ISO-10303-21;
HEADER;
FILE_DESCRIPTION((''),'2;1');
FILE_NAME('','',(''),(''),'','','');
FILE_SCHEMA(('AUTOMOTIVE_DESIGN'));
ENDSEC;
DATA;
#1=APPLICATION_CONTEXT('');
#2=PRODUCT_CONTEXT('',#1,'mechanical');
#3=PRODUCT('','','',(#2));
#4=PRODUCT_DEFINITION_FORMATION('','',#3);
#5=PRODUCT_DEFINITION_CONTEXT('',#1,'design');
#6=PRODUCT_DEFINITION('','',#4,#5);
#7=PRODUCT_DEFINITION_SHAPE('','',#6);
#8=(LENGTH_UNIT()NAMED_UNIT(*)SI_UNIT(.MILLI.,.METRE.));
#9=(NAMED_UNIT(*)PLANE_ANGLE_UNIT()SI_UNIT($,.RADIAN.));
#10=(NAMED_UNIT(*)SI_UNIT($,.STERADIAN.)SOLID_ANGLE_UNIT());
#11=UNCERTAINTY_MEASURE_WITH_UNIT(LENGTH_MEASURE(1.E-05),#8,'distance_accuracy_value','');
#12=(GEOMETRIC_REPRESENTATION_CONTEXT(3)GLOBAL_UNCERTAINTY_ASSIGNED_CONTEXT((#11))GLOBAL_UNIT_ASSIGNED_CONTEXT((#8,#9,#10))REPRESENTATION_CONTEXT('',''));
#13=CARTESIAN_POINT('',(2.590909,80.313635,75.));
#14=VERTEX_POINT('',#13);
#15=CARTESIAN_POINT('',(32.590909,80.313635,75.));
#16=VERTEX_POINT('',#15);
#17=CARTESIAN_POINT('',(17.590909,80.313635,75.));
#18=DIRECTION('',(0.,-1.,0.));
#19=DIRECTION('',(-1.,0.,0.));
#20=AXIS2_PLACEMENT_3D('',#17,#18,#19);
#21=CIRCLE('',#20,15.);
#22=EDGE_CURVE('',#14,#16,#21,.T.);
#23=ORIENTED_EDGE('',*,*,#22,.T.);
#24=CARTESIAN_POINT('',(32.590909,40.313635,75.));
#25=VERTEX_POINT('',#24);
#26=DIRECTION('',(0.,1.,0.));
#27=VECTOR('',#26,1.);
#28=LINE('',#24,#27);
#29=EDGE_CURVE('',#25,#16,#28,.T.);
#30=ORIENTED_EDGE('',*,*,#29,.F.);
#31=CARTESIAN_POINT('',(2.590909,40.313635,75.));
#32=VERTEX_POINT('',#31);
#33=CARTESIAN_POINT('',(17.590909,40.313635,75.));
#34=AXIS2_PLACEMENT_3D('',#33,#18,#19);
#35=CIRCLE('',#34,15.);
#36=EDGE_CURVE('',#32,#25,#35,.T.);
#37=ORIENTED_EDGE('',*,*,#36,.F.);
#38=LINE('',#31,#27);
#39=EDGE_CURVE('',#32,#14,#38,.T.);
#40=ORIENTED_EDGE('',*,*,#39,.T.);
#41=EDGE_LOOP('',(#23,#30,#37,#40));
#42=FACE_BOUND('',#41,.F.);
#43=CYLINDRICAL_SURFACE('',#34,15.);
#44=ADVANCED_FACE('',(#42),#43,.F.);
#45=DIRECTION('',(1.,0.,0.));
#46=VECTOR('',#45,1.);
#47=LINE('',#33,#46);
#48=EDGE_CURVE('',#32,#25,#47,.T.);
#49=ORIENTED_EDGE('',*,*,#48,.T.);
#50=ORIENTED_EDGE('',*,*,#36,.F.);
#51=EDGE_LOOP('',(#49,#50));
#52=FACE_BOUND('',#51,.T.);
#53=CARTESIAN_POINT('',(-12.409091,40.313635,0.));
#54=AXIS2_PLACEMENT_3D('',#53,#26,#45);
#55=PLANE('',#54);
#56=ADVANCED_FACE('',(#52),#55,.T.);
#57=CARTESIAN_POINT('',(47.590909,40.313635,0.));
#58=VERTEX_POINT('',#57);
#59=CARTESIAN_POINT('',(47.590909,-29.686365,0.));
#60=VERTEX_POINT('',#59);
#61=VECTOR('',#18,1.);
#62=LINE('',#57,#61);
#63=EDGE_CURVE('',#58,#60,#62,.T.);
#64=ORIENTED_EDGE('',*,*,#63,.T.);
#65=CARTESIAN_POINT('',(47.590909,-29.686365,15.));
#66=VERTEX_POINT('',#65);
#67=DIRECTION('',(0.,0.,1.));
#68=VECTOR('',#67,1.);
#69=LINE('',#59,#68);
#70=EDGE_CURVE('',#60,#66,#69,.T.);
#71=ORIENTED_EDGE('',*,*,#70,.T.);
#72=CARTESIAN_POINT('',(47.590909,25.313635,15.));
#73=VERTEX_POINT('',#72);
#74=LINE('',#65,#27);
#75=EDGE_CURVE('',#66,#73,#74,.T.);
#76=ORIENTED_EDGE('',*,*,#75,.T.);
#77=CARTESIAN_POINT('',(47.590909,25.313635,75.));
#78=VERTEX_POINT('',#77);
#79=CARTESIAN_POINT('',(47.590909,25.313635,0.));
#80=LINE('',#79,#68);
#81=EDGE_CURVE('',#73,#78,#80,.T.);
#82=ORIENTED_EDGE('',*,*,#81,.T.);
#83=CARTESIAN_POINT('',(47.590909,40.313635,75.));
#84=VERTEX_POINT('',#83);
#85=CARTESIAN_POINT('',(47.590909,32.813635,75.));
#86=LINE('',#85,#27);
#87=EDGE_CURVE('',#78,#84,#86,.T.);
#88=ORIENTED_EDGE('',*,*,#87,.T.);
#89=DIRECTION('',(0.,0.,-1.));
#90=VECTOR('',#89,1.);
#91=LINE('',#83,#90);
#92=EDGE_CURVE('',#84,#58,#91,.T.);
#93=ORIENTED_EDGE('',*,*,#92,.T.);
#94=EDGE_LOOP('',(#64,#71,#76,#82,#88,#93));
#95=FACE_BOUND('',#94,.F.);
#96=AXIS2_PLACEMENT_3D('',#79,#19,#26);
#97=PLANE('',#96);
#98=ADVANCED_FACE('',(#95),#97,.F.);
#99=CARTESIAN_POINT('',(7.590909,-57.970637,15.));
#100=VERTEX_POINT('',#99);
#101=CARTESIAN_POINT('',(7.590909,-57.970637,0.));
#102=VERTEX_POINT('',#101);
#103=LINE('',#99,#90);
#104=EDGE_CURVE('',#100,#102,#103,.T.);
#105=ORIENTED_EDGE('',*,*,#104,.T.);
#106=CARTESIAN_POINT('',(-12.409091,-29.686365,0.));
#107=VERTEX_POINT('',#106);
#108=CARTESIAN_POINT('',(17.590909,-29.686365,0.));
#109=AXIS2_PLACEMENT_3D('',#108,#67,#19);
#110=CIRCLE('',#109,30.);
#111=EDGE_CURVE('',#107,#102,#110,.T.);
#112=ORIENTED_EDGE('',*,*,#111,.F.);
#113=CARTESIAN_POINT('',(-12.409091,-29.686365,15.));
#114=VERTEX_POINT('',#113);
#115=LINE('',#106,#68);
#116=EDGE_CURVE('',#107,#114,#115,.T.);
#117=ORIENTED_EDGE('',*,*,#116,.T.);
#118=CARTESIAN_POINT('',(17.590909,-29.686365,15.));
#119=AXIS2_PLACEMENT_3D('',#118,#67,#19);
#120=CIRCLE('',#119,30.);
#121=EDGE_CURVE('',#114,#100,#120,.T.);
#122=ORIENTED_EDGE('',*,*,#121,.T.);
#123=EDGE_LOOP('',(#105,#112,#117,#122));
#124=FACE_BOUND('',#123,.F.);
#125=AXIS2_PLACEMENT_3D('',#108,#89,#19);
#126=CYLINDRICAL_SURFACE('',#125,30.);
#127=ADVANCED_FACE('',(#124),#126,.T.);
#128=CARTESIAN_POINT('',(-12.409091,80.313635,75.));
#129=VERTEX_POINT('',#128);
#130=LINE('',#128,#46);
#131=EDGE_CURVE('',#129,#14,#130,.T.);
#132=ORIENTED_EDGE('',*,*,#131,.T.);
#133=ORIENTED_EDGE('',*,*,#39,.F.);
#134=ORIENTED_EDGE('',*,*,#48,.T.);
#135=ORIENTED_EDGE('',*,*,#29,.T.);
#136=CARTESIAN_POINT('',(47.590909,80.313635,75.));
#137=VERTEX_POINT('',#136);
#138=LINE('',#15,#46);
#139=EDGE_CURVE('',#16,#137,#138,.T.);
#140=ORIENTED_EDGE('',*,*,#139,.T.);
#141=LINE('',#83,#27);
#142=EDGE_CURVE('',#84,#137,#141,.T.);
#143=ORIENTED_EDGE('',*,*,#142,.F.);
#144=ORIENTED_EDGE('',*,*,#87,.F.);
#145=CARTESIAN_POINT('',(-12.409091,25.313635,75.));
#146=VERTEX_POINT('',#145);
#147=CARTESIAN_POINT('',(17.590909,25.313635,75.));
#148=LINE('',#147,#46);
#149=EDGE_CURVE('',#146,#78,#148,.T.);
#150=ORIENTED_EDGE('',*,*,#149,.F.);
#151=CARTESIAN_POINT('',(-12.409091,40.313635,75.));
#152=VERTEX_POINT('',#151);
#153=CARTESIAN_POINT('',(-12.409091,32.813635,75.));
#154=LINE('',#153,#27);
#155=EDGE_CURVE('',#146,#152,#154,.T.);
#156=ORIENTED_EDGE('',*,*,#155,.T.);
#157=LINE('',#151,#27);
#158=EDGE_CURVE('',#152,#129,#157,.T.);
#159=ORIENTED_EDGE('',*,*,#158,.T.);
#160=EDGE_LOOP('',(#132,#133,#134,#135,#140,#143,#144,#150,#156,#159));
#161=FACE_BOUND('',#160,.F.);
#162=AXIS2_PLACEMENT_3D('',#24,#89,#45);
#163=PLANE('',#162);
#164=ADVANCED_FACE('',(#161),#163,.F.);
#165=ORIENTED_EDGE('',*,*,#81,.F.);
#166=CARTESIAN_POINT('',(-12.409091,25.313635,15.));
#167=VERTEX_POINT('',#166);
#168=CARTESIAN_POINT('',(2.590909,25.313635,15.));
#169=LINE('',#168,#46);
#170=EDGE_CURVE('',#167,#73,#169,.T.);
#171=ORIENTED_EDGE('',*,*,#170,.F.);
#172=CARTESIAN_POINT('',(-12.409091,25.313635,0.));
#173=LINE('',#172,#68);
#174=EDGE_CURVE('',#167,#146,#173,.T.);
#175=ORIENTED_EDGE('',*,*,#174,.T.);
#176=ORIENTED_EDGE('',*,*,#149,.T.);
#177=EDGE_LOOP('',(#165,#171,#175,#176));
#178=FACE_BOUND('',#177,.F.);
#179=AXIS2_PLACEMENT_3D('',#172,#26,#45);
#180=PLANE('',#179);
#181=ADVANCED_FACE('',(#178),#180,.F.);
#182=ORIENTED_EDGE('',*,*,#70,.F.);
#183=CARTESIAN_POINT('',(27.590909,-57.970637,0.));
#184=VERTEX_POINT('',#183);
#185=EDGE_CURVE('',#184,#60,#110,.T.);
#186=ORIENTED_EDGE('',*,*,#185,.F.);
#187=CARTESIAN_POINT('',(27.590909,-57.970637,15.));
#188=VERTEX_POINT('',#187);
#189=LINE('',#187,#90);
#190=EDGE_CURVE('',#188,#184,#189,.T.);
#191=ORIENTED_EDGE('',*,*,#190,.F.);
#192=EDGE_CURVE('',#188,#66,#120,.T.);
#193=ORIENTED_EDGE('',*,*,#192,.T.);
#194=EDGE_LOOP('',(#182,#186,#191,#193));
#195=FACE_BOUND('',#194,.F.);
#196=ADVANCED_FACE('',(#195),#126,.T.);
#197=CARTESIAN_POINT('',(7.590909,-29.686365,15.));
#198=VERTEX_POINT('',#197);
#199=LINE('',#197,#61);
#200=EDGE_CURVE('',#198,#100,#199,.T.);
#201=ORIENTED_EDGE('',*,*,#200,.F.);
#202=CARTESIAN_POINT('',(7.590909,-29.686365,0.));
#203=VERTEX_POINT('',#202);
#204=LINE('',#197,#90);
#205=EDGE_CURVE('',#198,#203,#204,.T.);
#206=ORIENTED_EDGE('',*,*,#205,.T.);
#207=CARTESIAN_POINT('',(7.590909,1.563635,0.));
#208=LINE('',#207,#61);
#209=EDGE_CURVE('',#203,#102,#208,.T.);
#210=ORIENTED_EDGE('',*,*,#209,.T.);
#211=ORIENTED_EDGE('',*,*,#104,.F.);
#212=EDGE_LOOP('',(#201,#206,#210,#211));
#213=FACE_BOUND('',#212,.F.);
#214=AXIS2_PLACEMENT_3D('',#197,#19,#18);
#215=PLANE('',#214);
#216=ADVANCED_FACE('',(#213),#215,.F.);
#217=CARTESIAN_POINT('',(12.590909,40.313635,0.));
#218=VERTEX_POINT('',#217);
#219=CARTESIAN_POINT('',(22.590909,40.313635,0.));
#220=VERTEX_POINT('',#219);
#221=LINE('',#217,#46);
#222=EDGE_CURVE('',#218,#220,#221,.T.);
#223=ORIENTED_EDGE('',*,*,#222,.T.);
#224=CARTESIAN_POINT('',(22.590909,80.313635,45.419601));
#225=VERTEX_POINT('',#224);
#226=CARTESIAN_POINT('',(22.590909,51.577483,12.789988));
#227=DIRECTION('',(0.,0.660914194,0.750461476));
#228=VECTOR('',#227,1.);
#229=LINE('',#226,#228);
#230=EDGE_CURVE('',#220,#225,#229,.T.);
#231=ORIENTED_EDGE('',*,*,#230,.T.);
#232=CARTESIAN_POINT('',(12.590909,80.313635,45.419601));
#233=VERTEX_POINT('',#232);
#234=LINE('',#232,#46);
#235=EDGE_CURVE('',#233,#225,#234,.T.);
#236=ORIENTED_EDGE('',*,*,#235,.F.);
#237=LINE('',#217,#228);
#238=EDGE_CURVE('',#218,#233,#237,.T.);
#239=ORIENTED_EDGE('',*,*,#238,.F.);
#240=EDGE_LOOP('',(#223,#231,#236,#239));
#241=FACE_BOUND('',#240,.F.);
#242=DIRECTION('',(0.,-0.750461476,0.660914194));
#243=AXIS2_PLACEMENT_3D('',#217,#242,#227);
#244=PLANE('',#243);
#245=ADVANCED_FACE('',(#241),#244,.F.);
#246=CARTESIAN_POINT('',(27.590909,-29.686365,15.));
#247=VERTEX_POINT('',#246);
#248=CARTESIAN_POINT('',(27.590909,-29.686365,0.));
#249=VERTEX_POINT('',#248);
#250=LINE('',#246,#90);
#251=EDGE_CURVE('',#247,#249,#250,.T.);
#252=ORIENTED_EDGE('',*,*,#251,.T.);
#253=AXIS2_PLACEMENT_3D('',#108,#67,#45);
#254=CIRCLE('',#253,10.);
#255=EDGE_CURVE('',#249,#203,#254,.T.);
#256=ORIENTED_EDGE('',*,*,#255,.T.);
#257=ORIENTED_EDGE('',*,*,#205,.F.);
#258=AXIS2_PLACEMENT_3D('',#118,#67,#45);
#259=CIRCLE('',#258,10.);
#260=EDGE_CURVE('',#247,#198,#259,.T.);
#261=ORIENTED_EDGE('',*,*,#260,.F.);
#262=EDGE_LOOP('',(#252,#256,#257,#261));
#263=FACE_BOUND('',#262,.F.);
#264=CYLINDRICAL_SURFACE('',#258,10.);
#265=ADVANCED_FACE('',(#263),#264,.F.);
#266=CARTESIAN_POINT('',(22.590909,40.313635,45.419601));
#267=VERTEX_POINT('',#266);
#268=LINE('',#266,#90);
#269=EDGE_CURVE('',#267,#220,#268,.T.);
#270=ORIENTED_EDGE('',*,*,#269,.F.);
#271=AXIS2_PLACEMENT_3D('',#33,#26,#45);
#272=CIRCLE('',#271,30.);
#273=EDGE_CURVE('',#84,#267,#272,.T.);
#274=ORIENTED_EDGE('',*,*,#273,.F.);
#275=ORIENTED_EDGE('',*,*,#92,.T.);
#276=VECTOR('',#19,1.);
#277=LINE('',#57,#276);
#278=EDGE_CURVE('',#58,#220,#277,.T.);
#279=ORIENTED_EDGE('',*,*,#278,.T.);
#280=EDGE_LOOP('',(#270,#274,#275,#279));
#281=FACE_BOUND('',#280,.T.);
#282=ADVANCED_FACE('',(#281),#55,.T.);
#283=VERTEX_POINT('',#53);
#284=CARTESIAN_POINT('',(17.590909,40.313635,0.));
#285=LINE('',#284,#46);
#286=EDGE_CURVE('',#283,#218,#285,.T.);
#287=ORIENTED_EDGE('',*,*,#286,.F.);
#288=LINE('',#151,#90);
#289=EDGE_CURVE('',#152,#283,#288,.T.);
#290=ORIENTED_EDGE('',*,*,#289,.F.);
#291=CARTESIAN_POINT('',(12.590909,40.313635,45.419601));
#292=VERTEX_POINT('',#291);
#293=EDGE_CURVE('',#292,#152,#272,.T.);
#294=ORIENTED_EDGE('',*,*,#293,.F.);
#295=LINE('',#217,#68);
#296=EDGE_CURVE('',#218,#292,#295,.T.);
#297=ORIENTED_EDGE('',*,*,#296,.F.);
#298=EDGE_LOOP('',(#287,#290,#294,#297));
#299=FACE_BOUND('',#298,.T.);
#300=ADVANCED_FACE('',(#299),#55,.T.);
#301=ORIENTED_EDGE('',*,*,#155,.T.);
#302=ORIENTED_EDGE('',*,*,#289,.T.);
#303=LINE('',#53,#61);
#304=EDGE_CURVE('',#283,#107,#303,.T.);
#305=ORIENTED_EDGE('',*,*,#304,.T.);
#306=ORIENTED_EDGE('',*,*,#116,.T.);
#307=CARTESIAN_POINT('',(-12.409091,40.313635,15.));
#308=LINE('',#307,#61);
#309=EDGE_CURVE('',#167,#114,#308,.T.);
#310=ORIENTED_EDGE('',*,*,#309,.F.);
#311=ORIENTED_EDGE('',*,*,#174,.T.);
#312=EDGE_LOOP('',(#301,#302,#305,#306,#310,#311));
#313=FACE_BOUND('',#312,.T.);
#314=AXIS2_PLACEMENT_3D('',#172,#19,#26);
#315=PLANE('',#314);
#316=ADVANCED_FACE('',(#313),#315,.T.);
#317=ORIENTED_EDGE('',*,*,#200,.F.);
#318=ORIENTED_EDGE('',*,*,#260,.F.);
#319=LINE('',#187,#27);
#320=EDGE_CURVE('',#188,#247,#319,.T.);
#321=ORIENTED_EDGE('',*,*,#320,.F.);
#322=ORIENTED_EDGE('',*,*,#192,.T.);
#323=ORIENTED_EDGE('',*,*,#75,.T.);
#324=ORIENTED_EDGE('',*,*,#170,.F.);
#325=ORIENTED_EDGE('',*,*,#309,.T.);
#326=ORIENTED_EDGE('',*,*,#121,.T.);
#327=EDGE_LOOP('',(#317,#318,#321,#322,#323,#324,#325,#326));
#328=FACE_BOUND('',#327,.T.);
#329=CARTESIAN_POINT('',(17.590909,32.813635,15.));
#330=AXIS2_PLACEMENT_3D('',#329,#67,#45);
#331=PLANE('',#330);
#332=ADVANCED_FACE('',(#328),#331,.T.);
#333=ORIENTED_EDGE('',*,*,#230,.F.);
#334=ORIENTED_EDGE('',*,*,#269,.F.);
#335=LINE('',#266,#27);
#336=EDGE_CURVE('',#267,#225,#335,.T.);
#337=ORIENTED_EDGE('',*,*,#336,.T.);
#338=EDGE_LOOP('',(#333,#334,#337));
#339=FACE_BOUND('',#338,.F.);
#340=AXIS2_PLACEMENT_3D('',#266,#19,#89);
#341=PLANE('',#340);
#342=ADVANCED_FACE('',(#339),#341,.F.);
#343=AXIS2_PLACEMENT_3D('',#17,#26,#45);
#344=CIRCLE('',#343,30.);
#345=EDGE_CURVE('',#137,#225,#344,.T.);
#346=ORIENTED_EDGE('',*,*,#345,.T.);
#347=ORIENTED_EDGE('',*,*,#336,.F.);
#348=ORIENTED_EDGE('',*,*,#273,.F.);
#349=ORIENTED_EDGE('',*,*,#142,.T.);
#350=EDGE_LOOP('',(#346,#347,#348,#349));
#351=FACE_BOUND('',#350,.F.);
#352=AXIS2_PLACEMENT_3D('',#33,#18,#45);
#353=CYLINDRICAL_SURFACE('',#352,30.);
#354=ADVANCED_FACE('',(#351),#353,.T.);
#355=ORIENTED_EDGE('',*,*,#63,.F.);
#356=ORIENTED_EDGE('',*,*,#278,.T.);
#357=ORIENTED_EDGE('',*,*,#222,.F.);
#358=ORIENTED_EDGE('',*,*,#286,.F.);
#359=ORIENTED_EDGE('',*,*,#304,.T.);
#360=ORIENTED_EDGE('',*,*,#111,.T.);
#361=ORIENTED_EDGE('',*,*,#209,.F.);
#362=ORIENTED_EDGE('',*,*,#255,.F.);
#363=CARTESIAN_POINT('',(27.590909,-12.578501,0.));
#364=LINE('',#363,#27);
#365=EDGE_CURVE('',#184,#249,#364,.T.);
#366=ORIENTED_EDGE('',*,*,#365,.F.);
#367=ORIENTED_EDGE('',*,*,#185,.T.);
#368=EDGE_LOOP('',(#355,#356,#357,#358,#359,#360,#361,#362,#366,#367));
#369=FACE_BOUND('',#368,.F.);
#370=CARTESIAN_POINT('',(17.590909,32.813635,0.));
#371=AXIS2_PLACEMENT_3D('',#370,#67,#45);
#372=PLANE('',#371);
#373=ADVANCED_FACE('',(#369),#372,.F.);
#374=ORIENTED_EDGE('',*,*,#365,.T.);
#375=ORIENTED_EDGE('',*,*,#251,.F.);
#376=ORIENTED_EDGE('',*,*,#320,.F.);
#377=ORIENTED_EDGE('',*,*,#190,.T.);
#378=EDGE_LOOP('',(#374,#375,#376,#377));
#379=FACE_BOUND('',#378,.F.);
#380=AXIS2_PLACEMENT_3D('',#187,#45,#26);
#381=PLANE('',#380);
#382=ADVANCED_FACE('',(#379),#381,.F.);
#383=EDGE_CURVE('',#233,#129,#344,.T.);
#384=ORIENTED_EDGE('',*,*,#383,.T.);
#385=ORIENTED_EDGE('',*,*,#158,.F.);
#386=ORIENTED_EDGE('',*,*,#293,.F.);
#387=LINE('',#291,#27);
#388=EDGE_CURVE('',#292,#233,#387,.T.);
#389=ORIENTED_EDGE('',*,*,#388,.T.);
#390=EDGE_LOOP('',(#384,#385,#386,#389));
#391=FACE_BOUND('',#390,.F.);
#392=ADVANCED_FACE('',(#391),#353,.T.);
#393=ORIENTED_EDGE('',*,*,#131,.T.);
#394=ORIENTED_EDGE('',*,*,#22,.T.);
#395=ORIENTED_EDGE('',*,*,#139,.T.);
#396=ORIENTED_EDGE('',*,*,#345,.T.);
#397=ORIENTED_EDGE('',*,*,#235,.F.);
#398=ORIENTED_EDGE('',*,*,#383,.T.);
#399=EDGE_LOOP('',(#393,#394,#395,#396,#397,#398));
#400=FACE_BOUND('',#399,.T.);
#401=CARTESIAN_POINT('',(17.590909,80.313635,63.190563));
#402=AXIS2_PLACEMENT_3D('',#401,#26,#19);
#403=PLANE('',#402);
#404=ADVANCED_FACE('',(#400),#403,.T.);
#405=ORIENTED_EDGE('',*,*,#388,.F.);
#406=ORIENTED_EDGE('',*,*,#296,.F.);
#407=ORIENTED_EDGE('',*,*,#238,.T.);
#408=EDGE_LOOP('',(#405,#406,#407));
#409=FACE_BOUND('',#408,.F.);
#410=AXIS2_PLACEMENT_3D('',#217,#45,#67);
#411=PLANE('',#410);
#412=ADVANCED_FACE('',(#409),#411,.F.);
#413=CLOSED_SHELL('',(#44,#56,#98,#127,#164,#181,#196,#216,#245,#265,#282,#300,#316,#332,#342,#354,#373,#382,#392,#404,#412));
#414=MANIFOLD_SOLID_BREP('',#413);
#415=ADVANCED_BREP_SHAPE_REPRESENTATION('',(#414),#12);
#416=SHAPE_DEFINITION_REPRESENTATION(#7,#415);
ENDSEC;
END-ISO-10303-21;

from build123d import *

# Parameters (mm, degrees)
F0_W      = 60
F0_H      = 15
F1_DEPTH  = 75
F2_DEPTH  = 15
F4_DEPTH  = 25
F6_DEPTH  = 40
F8_DEPTH  = 40
F10_DEPTH = 25


with BuildPart() as f1:
    # F0 (on Top) → F1 (new body)
    with BuildSketch(Plane.XY):
        with Locations((17.5909090042, 32.8136347234)):
            Rectangle(F0_W, F0_H)
    extrude(amount=F1_DEPTH)

    # F0 (on Top) → F2 (join)
    with BuildSketch(Plane.XY):
        with Locations((17.5909090042, 32.8136347234)):
            Rectangle(F0_W, F0_H)
        with BuildLine():
            Line((47.5909090042, 25.3136347234), (-12.4090909958, 25.3136347234))
            Line((-12.4090909958, 25.3136347234), (-12.4090909958, -29.6863652766))
            ThreePointArc((-12.4090909958, -29.6863652766), (17.5909090042, 0.3136347234), (47.5909090042, -29.6863652766))
            Line((47.5909090042, -29.6863652766), (47.5909090042, 25.3136347234))
        make_face()
        with BuildLine():
            ThreePointArc((47.5909090042, -29.6863652766), (17.5909090042, 0.3136347234), (-12.4090909958, -29.6863652766))
            Line((-12.4090909958, -29.6863652766), (47.5909090042, -29.6863652766))
        make_face()
        with BuildLine():
            Line((47.5909090042, -29.6863652766), (-12.4090909958, -29.6863652766))
            ThreePointArc((-12.4090909958, -29.6863652766), (17.5909090042, -59.6863652766), (47.5909090042, -29.6863652766))
        make_face()
    extrude(amount=F2_DEPTH)

    # F3 (on face) → F4 (cut)
    with BuildSketch(Plane.XY.offset(15)):
        with BuildLine():
            ThreePointArc((7.5909090042, -57.970636524), (17.5909090042, -59.6863652766), (27.5909090042, -57.970636524))
            Line((27.5909090042, -57.970636524), (27.5909090042, -29.6863652766))
            ThreePointArc((27.5909090042, -29.6863652766), (17.5909090042, -39.6863652766), (7.5909090042, -29.6863652766))
            Line((7.5909090042, -29.6863652766), (7.5909090042, -57.970636524))
        make_face()
        with BuildLine():
            ThreePointArc((7.5909090042, -29.6863652766), (17.5909090042, -39.6863652766), (27.5909090042, -29.6863652766))
            Line((27.5909090042, -29.6863652766), (17.5909090042, -29.6863652766))
            Line((17.5909090042, -29.6863652766), (7.5909090042, -29.6863652766))
        make_face()
        with BuildLine():
            Line((17.5909090042, -29.6863652766), (27.5909090042, -29.6863652766))
            ThreePointArc((27.5909090042, -29.6863652766), (17.5909090042, -19.6863652766), (7.5909090042, -29.6863652766))
            Line((7.5909090042, -29.6863652766), (17.5909090042, -29.6863652766))
        make_face()
    extrude(amount=-F4_DEPTH, mode=Mode.SUBTRACT)

    # F5 (on face) → F6 (join)
    with BuildSketch(Plane(origin=(0, 40.3136347234, 0), x_dir=(-1, 0, 0), z_dir=(0, 1, 0))):
        with BuildLine():
            Line((-42.2313958406, 75), (-47.5909090042, 75))
            ThreePointArc((-47.5909090042, 75), (-17.5909090042, 45), (12.4090909958, 75))
            Line((12.4090909958, 75), (-2.5909090042, 75))
            ThreePointArc((-2.5909090042, 75), (-17.5909090042, 60), (-32.5909090042, 75))
            Line((-32.5909090042, 75), (-42.2313958406, 75))
        make_face()
    extrude(amount=F6_DEPTH)

    # F7 (on face) → F8 (join)
    with BuildSketch(Plane(origin=(0, 40.3136347234, 0), x_dir=(-1, 0, 0), z_dir=(0, 1, 0))):
        with BuildLine():
            Line((-22.5909090042, 45.4196010845), (-22.5909090042, 0))
            Line((-22.5909090042, 0), (-12.5909090042, 0))
            Line((-12.5909090042, 0), (-12.5909090042, 45.4196010845))
            ThreePointArc((-12.5909090042, 45.4196010845), (-17.5909090042, 45), (-22.5909090042, 45.4196010845))
        make_face()
    extrude(amount=F8_DEPTH)

    # F9 (on face) → F10 (cut)
    with BuildSketch(Plane(origin=(12.5909090042, 0, 0), x_dir=(0, -1, 0), z_dir=(-1, 0, 0))):
        Polygon((-40.3136347234, 0), (-80.3136347234, 45.4196010845), (-80.3136347234, 0), align=None)
    extrude(amount=-F10_DEPTH, mode=Mode.SUBTRACT)


solid = f1.part
